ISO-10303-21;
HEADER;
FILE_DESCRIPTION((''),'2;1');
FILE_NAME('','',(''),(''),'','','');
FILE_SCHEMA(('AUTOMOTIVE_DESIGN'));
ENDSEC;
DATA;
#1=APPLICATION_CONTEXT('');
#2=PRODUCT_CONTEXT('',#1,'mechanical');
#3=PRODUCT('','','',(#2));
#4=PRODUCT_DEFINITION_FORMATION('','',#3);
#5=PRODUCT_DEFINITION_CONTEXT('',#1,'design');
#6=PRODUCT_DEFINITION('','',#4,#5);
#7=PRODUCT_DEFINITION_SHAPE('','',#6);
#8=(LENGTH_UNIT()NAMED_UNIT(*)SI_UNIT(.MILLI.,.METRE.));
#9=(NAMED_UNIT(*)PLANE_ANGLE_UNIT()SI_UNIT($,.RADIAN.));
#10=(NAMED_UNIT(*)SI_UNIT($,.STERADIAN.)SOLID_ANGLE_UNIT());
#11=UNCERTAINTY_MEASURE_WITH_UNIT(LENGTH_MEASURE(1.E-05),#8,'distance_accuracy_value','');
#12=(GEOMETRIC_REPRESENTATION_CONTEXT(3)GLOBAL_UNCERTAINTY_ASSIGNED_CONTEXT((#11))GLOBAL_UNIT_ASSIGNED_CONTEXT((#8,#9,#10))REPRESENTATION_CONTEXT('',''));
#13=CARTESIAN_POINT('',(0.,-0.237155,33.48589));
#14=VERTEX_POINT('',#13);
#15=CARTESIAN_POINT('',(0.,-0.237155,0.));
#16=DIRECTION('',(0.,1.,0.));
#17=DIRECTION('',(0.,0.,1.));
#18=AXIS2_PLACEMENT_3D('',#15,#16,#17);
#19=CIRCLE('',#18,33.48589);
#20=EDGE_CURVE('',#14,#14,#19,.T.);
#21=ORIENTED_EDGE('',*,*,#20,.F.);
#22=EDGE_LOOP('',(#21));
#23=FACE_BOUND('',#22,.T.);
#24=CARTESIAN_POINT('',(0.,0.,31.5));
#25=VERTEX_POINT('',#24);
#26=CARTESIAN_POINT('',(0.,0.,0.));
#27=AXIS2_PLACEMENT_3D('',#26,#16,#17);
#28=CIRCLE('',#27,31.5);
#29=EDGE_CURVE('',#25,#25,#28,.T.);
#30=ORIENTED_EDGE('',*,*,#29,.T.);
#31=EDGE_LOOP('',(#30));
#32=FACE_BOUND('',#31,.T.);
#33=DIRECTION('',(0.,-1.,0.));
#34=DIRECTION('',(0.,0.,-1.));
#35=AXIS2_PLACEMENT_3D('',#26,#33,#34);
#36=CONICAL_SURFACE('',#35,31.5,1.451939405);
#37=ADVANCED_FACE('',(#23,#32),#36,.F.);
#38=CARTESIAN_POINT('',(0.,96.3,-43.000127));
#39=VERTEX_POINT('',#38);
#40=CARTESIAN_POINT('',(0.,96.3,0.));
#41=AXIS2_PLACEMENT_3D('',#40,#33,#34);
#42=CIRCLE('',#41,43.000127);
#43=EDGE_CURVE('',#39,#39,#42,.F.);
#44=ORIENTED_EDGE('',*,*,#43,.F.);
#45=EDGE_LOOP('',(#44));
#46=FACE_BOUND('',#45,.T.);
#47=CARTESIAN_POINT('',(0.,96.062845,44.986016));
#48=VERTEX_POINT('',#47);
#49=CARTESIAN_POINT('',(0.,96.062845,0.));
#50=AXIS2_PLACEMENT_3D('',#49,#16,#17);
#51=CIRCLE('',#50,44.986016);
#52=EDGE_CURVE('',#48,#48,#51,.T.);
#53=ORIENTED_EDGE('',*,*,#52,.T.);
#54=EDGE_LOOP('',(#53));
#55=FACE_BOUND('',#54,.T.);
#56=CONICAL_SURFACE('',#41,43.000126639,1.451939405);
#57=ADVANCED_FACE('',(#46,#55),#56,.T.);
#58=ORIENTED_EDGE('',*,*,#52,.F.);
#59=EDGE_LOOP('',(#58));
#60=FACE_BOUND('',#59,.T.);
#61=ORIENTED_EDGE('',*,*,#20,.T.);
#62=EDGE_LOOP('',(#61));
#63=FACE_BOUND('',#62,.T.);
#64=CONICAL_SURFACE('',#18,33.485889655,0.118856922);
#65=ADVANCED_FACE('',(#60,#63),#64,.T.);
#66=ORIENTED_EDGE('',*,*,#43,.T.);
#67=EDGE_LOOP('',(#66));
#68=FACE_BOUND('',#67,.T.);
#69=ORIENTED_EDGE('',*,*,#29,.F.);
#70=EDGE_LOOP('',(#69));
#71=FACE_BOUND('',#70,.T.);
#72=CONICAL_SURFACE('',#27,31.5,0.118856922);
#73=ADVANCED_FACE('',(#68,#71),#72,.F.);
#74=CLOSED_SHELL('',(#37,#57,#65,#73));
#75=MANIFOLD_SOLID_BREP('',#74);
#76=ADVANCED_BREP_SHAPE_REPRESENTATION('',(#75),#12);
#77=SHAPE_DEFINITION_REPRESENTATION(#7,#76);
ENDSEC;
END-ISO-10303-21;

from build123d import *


# Read off the part's stored shape, not the designer's step: Thicken1
with BuildPart() as part:
    # Thicken1 outline → Thicken1 (revolve)
    with BuildSketch(Plane.XY):
        Polygon((43.000126639, 96.3), (31.5, 0), (33.485889655, -0.237154543), (44.986016294, 96.062845457), align=None)
    revolve(axis=Axis((0, 0, 0), (0, 1, 0)))


solid = part.part
